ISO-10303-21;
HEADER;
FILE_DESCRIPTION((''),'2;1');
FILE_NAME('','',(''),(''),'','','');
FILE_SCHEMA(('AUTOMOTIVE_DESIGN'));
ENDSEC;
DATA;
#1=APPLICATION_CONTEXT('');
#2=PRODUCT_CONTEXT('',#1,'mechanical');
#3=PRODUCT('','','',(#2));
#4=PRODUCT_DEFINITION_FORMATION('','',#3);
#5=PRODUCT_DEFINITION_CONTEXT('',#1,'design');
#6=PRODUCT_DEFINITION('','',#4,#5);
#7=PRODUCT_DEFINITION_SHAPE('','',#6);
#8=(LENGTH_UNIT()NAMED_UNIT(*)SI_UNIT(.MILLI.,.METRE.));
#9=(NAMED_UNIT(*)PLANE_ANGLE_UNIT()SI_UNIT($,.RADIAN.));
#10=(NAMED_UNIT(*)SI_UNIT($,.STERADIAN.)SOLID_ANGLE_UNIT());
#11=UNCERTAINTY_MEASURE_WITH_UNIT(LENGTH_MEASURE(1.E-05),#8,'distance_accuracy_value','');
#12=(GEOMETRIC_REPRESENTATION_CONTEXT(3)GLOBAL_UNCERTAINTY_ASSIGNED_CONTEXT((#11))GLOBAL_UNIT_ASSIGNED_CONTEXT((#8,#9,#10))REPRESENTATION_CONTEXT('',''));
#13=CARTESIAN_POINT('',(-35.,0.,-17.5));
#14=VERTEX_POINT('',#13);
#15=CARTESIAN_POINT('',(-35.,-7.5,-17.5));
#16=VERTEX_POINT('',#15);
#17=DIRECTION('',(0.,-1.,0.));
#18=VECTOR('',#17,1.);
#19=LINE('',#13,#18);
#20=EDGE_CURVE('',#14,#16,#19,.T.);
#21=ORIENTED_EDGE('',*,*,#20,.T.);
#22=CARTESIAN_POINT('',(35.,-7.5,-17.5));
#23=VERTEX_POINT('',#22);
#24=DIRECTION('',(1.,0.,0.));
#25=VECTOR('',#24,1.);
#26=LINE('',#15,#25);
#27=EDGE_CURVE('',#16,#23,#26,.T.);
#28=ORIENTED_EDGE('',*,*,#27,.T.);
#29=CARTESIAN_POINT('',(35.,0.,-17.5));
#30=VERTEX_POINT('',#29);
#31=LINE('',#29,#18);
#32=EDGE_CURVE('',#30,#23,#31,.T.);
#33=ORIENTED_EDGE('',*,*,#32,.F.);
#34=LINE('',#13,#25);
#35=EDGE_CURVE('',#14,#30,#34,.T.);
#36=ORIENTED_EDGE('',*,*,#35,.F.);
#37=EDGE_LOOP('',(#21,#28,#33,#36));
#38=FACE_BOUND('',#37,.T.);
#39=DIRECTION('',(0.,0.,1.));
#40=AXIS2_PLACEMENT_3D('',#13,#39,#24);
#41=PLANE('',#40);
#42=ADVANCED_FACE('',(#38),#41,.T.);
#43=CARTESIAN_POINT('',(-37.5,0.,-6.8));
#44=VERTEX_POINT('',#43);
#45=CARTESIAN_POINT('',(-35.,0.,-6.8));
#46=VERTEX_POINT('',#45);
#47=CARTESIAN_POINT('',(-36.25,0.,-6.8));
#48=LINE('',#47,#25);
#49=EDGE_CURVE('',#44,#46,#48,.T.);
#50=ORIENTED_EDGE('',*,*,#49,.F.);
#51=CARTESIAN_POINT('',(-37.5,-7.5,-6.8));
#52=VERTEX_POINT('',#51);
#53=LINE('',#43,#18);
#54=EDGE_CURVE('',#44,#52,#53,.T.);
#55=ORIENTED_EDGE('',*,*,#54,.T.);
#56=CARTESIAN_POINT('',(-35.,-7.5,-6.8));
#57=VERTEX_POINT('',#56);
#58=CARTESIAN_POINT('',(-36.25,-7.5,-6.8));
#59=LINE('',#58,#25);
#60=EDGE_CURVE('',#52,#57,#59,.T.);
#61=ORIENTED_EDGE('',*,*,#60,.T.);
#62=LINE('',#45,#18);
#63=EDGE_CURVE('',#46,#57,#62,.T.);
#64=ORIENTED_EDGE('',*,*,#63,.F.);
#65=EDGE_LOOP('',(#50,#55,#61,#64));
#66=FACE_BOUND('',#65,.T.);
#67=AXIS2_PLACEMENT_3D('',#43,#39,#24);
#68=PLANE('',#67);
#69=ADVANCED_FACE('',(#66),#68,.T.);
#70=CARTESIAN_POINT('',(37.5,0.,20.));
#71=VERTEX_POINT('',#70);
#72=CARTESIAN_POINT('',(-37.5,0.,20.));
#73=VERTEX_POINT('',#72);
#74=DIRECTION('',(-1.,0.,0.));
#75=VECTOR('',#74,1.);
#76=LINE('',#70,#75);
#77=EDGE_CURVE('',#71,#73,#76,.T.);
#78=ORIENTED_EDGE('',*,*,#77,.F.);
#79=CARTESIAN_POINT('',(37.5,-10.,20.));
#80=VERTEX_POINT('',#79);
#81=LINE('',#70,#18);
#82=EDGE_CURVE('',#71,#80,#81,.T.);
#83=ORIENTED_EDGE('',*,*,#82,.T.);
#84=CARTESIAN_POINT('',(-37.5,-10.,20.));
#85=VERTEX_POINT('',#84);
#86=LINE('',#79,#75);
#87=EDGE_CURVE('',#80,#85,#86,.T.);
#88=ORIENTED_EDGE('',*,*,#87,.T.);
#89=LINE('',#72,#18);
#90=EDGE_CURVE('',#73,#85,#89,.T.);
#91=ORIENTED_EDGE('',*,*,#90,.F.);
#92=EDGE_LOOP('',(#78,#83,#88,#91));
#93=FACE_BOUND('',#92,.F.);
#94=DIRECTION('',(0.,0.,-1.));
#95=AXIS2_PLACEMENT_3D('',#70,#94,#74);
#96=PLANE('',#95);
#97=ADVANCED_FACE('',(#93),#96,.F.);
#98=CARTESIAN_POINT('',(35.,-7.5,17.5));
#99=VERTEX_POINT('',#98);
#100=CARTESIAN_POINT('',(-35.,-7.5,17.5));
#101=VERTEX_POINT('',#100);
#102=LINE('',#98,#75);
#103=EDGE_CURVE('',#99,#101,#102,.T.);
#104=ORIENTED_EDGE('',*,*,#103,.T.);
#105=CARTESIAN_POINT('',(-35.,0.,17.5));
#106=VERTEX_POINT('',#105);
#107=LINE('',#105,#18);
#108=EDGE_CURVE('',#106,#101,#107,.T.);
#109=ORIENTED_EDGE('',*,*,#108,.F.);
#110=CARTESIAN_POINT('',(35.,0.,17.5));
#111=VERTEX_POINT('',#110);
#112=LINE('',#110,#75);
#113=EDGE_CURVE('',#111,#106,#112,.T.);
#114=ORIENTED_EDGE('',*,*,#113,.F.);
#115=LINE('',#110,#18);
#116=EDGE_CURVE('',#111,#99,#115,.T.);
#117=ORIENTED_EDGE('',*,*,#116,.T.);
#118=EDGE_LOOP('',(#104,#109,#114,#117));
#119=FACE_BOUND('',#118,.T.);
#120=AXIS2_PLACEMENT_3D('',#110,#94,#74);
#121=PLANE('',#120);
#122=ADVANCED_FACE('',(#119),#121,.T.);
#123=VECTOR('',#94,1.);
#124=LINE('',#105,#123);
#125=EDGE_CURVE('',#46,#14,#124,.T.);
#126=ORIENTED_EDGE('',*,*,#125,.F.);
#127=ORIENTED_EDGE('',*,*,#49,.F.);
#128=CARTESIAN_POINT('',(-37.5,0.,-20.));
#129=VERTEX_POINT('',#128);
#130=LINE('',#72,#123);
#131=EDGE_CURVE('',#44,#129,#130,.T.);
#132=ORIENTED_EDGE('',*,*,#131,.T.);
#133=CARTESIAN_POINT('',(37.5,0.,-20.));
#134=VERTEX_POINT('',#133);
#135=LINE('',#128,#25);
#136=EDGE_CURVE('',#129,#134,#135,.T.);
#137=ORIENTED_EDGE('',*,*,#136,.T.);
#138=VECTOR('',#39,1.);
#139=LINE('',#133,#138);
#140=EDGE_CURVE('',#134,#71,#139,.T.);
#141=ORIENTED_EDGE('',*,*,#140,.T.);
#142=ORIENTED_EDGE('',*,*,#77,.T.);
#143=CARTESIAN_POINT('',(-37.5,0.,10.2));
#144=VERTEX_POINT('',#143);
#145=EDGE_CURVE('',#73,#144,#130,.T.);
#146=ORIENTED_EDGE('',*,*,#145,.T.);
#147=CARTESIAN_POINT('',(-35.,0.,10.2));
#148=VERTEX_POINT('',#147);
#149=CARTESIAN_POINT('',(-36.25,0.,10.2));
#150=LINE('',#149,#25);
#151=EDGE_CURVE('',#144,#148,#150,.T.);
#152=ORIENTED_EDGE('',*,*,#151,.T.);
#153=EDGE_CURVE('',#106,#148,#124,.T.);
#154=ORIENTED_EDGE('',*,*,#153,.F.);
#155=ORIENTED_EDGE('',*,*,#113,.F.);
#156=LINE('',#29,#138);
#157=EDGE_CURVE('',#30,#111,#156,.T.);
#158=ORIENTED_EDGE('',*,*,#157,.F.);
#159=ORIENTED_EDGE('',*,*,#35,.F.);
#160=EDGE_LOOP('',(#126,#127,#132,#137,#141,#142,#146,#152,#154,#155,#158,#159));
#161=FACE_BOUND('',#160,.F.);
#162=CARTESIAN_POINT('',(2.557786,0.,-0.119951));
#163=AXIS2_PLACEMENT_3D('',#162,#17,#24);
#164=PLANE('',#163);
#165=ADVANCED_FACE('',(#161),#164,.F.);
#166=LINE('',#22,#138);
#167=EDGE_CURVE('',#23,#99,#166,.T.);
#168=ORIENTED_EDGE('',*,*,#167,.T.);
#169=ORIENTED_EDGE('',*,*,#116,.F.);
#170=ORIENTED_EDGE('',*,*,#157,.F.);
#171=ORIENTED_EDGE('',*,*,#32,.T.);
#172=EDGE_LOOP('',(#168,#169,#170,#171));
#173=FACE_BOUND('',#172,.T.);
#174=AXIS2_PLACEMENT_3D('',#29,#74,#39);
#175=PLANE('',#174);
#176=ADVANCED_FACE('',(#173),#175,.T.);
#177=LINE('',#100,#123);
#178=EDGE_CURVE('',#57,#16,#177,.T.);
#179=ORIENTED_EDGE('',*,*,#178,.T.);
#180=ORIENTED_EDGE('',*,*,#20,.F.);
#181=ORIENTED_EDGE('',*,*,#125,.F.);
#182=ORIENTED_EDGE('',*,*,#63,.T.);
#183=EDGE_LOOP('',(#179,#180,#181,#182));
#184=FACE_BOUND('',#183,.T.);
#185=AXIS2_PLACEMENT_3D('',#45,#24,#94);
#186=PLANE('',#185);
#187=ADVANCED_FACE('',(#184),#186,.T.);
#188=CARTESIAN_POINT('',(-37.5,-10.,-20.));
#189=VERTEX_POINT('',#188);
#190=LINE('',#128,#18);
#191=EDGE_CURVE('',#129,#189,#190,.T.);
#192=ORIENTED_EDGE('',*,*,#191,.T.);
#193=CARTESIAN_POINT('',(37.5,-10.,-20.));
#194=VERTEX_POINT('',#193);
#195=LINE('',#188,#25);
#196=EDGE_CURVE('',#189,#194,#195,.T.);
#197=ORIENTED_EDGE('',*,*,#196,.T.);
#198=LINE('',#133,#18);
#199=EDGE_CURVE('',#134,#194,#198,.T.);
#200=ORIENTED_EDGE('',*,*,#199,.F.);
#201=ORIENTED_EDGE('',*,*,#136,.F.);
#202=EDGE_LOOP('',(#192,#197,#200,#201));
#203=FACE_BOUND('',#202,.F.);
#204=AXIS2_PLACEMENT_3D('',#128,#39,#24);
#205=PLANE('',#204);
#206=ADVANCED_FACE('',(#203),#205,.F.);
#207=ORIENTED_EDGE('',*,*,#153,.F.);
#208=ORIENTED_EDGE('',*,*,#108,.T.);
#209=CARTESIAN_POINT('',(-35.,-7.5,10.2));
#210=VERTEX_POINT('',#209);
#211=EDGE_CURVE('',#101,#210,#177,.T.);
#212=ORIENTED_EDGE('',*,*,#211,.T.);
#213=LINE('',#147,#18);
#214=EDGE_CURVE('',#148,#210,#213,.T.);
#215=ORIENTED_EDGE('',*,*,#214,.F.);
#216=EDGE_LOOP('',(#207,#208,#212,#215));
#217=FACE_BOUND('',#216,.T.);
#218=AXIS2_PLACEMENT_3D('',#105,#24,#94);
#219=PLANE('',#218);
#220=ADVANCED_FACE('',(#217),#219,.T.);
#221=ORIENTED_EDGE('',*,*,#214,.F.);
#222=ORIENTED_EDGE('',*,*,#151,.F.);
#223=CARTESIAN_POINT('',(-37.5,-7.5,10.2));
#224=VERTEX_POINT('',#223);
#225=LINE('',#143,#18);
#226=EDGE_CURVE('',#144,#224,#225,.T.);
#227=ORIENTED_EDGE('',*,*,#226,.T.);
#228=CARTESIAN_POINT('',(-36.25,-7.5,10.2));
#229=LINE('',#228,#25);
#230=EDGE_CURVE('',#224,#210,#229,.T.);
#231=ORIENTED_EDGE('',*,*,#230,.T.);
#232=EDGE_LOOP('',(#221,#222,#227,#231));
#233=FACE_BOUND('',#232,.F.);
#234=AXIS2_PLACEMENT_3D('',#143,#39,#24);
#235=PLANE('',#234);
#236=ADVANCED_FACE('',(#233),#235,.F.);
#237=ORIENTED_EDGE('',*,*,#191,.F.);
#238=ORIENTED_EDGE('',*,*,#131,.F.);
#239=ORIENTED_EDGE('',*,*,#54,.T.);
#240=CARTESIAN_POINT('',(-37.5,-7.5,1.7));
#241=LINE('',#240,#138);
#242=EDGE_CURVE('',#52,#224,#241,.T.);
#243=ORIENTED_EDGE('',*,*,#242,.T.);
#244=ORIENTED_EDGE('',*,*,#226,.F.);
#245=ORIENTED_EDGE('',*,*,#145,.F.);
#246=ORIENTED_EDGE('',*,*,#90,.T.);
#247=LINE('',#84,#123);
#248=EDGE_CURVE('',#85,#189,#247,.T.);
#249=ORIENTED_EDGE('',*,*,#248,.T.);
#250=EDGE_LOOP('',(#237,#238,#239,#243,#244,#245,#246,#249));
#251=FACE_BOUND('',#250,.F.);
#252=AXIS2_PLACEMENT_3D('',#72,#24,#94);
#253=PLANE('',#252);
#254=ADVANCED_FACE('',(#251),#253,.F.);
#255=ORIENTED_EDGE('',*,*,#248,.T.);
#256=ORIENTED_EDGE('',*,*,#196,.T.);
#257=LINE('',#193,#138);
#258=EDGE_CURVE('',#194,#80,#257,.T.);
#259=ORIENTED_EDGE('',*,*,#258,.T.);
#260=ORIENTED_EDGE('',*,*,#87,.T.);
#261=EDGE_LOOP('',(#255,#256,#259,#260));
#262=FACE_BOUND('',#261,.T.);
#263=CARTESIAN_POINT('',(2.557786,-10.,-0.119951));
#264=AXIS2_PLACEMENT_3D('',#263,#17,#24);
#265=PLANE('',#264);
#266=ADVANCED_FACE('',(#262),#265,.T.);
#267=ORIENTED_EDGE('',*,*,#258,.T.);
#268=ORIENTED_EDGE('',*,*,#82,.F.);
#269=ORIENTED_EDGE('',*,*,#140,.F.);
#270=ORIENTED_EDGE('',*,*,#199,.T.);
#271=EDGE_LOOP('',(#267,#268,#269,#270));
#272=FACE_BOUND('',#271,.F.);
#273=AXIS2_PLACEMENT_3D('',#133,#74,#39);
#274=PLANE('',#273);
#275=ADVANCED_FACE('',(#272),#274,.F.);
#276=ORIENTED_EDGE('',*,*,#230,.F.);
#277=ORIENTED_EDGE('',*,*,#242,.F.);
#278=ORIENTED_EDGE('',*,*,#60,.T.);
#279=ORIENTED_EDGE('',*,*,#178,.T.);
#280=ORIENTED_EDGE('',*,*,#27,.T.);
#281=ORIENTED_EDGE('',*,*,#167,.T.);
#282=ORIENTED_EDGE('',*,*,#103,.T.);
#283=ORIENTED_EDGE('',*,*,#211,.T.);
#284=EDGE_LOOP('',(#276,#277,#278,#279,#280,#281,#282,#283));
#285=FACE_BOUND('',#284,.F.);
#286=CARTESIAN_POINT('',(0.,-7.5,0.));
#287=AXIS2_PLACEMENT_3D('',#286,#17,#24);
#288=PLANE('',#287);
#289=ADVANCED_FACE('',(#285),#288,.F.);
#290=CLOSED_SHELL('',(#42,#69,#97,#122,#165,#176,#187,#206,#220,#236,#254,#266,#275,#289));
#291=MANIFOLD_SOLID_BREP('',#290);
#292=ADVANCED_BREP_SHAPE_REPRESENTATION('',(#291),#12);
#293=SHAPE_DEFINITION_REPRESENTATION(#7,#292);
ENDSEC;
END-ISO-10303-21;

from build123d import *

# Parameters (mm, degrees)
F0_W     = 2.5
F0_H     = 17
F1_DEPTH = 10
F2_DEPTH = 7.5


# Not quite as in the source:
# - a feature names something its author has since deleted; it is built from what else it names


with BuildPart() as f1:
    # F0 (on Front) → F1 (new body)
    with BuildSketch(Plane.XZ):
        Polygon((37.5, 20), (-37.5, 20), (-37.5, 10.2), (-35, 10.2), (-35, 17.5), (35, 17.5), (35, -17.5), (-35, -17.5), (-35, -6.8), (-37.5, -6.8), (-37.5, -20), (37.5, -20), align=None)
        with Locations((-36.25, 1.7)):
            Rectangle(F0_W, F0_H)
        Polygon((-35, 17.5), (-35, 10.2), (-35, -6.8), (-35, -17.5), (35, -17.5), (35, 17.5), align=None)
    extrude(amount=F1_DEPTH)

    # F0 (on Front) → F2 (cut)
    with BuildSketch(Plane.XZ):
        Polygon((-35, 17.5), (-35, 10.2), (-35, -6.8), (-35, -17.5), (35, -17.5), (35, 17.5), align=None)
        with Locations((-36.25, 1.7)):
            Rectangle(F0_W, F0_H)
    extrude(amount=F2_DEPTH, mode=Mode.SUBTRACT)


solid = f1.part
